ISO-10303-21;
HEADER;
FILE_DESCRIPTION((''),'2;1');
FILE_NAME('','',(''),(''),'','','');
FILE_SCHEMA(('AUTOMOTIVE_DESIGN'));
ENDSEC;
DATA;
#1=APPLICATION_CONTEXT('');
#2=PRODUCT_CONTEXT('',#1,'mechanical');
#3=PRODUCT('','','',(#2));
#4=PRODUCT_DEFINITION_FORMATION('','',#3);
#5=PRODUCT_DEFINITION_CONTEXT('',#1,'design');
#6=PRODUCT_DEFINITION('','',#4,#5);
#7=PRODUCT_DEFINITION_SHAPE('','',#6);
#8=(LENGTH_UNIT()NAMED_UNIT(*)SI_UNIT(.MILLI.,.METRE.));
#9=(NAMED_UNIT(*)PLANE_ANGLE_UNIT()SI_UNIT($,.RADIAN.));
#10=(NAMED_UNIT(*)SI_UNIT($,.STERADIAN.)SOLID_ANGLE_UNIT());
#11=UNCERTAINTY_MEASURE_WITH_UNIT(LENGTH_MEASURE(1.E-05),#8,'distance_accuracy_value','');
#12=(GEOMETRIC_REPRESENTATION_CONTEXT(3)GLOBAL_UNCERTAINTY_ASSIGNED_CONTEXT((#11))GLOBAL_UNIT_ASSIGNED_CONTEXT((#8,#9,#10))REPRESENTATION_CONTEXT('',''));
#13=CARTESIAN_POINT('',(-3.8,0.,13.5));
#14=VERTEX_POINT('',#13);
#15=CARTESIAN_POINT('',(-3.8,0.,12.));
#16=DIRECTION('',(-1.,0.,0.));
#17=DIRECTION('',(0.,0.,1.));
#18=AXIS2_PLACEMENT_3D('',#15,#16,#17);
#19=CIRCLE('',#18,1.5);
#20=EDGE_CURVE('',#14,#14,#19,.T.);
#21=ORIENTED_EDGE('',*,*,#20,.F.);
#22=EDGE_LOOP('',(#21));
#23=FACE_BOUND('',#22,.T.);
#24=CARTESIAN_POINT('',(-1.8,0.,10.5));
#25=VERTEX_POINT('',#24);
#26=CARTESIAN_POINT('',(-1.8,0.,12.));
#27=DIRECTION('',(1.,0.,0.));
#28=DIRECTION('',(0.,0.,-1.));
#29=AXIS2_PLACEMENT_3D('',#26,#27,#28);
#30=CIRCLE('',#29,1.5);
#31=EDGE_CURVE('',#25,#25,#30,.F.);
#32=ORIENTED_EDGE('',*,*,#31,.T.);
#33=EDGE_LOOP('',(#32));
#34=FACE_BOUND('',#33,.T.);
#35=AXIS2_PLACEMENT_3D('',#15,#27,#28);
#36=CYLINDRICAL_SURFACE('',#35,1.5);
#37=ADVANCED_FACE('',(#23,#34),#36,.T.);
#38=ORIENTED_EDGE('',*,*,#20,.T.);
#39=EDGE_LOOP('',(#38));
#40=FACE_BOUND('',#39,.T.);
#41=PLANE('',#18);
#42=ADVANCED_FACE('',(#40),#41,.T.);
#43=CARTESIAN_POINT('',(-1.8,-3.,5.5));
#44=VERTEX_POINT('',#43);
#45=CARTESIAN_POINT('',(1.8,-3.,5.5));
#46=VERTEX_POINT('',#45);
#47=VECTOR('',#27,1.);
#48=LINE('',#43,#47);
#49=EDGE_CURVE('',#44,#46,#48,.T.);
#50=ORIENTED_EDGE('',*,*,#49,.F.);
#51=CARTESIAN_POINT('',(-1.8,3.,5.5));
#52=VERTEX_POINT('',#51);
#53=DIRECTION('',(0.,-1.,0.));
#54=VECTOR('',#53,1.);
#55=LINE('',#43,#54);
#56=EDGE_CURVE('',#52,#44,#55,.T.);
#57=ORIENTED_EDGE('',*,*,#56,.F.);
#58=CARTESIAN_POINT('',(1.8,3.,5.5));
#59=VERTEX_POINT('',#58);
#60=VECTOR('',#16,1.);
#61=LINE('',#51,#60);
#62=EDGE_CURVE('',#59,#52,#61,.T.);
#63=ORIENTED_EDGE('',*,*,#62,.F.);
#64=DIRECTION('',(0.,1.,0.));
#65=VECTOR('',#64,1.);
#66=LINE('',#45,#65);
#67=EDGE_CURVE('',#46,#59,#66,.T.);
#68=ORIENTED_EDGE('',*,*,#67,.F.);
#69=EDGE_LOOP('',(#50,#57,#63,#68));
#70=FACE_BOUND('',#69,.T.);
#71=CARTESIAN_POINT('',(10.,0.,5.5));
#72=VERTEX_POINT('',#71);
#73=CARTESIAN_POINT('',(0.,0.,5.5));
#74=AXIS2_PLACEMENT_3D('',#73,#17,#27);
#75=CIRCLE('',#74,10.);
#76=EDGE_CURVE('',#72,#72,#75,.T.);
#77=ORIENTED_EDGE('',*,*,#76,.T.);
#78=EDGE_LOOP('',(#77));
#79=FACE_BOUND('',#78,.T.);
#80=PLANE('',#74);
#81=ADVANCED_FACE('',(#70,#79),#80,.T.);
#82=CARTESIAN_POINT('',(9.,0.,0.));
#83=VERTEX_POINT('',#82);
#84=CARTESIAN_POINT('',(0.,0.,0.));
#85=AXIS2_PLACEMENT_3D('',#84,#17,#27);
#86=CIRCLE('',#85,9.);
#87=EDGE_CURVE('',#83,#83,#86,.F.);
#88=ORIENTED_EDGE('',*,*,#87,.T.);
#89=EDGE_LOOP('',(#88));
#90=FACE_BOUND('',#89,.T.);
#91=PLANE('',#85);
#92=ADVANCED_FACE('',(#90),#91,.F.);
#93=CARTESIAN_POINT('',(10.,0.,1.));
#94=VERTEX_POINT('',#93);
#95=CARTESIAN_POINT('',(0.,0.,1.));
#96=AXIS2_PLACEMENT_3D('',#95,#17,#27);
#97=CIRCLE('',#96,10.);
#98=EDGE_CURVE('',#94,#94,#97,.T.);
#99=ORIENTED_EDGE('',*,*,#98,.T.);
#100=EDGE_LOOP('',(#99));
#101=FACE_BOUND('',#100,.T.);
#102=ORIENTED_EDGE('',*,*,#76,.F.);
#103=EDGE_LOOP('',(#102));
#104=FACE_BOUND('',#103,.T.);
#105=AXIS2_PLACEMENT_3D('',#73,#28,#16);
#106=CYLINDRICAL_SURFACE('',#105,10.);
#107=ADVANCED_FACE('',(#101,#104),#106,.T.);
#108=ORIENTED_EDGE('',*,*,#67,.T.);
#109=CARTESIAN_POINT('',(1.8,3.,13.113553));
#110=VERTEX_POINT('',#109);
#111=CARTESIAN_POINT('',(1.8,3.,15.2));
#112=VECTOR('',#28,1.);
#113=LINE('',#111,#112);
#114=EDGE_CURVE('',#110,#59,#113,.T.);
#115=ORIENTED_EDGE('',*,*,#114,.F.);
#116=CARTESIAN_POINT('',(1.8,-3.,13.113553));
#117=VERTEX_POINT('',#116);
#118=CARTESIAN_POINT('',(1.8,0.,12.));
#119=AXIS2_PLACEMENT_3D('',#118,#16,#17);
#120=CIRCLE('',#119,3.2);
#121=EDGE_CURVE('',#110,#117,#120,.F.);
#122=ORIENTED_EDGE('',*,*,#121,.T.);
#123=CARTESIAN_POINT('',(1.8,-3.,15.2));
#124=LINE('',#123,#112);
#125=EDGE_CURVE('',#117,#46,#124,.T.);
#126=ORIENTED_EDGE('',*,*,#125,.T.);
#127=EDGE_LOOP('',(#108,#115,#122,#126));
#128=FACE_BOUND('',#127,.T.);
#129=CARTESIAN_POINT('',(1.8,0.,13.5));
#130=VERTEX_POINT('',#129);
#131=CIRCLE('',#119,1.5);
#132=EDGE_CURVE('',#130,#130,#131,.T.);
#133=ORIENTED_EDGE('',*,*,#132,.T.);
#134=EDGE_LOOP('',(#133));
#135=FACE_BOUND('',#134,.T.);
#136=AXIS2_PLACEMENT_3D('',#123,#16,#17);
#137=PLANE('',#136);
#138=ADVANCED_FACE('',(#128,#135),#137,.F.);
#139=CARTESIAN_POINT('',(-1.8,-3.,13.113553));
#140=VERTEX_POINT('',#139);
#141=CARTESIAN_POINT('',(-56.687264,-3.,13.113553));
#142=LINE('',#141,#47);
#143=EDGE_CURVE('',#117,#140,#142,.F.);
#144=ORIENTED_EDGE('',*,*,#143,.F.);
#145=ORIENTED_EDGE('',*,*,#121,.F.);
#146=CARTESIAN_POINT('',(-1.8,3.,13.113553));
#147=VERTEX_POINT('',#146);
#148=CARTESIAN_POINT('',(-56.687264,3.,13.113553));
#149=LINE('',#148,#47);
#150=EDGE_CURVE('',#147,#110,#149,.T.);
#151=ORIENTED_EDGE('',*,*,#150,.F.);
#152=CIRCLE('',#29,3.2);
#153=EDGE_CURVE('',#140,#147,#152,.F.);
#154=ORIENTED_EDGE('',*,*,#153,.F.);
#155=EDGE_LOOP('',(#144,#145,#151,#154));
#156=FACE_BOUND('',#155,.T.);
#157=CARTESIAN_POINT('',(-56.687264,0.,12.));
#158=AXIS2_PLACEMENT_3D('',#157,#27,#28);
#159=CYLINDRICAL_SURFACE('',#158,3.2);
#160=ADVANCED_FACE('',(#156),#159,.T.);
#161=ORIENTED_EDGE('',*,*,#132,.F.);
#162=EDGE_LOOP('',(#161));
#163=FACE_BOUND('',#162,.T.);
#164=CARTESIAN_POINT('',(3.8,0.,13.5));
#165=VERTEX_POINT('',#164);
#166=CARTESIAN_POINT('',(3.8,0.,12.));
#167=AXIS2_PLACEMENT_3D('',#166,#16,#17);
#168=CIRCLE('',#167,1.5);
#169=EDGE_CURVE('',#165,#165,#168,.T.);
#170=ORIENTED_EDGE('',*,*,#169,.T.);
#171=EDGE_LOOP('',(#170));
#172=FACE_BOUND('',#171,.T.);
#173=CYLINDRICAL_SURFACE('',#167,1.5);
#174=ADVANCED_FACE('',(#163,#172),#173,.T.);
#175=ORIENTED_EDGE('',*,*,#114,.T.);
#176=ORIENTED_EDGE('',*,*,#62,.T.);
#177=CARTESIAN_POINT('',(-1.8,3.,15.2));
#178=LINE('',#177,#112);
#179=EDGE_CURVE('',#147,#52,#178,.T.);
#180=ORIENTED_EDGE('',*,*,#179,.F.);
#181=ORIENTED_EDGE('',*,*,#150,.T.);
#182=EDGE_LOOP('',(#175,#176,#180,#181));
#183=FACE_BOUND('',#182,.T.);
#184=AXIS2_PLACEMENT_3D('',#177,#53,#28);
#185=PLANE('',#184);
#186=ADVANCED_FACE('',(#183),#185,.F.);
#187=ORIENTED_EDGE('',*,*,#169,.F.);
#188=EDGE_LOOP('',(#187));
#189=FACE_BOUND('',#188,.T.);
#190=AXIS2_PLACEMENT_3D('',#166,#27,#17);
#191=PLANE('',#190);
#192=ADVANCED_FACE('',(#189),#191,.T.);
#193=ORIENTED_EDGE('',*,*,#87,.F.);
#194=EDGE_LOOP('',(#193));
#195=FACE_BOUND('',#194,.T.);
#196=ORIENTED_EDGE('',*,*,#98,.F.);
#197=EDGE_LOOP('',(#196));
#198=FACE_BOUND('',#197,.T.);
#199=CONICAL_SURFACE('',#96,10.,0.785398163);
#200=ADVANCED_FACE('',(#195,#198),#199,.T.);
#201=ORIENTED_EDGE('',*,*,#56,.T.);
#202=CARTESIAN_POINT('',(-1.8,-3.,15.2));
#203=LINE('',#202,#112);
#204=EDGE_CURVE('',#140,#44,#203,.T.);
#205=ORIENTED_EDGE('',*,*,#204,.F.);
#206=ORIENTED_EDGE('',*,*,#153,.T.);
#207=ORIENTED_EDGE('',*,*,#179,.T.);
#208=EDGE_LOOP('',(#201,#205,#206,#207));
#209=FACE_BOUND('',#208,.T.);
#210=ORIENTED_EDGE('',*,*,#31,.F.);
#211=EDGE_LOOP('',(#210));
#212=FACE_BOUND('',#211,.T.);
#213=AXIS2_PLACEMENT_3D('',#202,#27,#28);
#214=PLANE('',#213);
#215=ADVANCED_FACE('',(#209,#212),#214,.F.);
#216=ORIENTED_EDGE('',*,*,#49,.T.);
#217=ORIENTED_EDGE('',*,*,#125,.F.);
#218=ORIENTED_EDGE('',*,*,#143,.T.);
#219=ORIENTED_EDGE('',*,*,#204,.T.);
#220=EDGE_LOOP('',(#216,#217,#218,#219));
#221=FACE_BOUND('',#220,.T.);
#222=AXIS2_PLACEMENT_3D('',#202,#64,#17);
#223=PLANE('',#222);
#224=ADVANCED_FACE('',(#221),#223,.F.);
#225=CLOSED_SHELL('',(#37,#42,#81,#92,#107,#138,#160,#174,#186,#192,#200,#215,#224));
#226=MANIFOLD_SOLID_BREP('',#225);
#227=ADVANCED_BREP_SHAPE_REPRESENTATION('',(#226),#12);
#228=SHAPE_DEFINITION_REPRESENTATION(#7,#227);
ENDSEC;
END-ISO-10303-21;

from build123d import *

# Parameters (mm, degrees)
SKETCH_1_R          = 10
EXTRUDE_1_DEPTH     = 5.5
SKETCH_2_W          = 3.6
SKETCH_2_H          = 6
EXTRUDE_2_DEPTH     = 9.7
CUT_EXTRUDE_START   = -3.6
CUT_EXTRUDE_1_DEPTH = 3.6
CHAMFER_1_SIZE      = 1
SKETCH_4_R          = 1.5
EXTRUDE_3_DEPTH     = 2


# Read off the part's stored shape, not the designer's step: 切除-拉伸1
with BuildPart() as part:
    # 草图1 → 凸台-拉伸1 (new body)
    with BuildSketch(Plane.XY):
        Circle(SKETCH_1_R)
    extrude(amount=EXTRUDE_1_DEPTH)

    # 草图2 → 凸台-拉伸2 (add)
    with BuildSketch(Plane.XY.offset(5.5)):
        Rectangle(SKETCH_2_W, SKETCH_2_H)
    extrude(amount=EXTRUDE_2_DEPTH)

    # 切除-拉伸1 outline → 切除-拉伸1 (cut)
    with BuildSketch(Plane.ZY.offset(1.8).offset(CUT_EXTRUDE_START)):
        with BuildLine():
            Line((15.2, 3), (13.113552873, 3))
            ThreePointArc((13.113552873, 3), (14.627105745, 1.827105745), (15.2, 0))
            Line((15.2, 0), (15.2, 3))
        make_face()
        with BuildLine():
            Line((15.2, -3), (15.2, 0))
            ThreePointArc((15.2, 0), (14.627105745, -1.827105745), (13.113552873, -3))
            Line((13.113552873, -3), (15.2, -3))
        make_face()
    extrude(amount=CUT_EXTRUDE_1_DEPTH, mode=Mode.SUBTRACT)

    # 倒角1
    chamfer_1_edges = [part.edges().sort_by_distance(p)[0] for p in [
        (-10, 0, 0),
    ]]
    chamfer(chamfer_1_edges, length=CHAMFER_1_SIZE)

    # 草图4 → 凸台-拉伸3 (add)
    with BuildSketch(Plane.ZY.offset(1.8)):
        with Locations(Location((12, 0, 0), (0, 0, 180))):
            Circle(SKETCH_4_R)
    extrude_3 = extrude(amount=EXTRUDE_3_DEPTH)

    # 镜向1: 凸台-拉伸3 across plane
    add(extrude_3.mirror(Plane(origin=(0, 0, 0), x_dir=(0, 0, 1), z_dir=(1, 0, 0))))


solid = part.part
